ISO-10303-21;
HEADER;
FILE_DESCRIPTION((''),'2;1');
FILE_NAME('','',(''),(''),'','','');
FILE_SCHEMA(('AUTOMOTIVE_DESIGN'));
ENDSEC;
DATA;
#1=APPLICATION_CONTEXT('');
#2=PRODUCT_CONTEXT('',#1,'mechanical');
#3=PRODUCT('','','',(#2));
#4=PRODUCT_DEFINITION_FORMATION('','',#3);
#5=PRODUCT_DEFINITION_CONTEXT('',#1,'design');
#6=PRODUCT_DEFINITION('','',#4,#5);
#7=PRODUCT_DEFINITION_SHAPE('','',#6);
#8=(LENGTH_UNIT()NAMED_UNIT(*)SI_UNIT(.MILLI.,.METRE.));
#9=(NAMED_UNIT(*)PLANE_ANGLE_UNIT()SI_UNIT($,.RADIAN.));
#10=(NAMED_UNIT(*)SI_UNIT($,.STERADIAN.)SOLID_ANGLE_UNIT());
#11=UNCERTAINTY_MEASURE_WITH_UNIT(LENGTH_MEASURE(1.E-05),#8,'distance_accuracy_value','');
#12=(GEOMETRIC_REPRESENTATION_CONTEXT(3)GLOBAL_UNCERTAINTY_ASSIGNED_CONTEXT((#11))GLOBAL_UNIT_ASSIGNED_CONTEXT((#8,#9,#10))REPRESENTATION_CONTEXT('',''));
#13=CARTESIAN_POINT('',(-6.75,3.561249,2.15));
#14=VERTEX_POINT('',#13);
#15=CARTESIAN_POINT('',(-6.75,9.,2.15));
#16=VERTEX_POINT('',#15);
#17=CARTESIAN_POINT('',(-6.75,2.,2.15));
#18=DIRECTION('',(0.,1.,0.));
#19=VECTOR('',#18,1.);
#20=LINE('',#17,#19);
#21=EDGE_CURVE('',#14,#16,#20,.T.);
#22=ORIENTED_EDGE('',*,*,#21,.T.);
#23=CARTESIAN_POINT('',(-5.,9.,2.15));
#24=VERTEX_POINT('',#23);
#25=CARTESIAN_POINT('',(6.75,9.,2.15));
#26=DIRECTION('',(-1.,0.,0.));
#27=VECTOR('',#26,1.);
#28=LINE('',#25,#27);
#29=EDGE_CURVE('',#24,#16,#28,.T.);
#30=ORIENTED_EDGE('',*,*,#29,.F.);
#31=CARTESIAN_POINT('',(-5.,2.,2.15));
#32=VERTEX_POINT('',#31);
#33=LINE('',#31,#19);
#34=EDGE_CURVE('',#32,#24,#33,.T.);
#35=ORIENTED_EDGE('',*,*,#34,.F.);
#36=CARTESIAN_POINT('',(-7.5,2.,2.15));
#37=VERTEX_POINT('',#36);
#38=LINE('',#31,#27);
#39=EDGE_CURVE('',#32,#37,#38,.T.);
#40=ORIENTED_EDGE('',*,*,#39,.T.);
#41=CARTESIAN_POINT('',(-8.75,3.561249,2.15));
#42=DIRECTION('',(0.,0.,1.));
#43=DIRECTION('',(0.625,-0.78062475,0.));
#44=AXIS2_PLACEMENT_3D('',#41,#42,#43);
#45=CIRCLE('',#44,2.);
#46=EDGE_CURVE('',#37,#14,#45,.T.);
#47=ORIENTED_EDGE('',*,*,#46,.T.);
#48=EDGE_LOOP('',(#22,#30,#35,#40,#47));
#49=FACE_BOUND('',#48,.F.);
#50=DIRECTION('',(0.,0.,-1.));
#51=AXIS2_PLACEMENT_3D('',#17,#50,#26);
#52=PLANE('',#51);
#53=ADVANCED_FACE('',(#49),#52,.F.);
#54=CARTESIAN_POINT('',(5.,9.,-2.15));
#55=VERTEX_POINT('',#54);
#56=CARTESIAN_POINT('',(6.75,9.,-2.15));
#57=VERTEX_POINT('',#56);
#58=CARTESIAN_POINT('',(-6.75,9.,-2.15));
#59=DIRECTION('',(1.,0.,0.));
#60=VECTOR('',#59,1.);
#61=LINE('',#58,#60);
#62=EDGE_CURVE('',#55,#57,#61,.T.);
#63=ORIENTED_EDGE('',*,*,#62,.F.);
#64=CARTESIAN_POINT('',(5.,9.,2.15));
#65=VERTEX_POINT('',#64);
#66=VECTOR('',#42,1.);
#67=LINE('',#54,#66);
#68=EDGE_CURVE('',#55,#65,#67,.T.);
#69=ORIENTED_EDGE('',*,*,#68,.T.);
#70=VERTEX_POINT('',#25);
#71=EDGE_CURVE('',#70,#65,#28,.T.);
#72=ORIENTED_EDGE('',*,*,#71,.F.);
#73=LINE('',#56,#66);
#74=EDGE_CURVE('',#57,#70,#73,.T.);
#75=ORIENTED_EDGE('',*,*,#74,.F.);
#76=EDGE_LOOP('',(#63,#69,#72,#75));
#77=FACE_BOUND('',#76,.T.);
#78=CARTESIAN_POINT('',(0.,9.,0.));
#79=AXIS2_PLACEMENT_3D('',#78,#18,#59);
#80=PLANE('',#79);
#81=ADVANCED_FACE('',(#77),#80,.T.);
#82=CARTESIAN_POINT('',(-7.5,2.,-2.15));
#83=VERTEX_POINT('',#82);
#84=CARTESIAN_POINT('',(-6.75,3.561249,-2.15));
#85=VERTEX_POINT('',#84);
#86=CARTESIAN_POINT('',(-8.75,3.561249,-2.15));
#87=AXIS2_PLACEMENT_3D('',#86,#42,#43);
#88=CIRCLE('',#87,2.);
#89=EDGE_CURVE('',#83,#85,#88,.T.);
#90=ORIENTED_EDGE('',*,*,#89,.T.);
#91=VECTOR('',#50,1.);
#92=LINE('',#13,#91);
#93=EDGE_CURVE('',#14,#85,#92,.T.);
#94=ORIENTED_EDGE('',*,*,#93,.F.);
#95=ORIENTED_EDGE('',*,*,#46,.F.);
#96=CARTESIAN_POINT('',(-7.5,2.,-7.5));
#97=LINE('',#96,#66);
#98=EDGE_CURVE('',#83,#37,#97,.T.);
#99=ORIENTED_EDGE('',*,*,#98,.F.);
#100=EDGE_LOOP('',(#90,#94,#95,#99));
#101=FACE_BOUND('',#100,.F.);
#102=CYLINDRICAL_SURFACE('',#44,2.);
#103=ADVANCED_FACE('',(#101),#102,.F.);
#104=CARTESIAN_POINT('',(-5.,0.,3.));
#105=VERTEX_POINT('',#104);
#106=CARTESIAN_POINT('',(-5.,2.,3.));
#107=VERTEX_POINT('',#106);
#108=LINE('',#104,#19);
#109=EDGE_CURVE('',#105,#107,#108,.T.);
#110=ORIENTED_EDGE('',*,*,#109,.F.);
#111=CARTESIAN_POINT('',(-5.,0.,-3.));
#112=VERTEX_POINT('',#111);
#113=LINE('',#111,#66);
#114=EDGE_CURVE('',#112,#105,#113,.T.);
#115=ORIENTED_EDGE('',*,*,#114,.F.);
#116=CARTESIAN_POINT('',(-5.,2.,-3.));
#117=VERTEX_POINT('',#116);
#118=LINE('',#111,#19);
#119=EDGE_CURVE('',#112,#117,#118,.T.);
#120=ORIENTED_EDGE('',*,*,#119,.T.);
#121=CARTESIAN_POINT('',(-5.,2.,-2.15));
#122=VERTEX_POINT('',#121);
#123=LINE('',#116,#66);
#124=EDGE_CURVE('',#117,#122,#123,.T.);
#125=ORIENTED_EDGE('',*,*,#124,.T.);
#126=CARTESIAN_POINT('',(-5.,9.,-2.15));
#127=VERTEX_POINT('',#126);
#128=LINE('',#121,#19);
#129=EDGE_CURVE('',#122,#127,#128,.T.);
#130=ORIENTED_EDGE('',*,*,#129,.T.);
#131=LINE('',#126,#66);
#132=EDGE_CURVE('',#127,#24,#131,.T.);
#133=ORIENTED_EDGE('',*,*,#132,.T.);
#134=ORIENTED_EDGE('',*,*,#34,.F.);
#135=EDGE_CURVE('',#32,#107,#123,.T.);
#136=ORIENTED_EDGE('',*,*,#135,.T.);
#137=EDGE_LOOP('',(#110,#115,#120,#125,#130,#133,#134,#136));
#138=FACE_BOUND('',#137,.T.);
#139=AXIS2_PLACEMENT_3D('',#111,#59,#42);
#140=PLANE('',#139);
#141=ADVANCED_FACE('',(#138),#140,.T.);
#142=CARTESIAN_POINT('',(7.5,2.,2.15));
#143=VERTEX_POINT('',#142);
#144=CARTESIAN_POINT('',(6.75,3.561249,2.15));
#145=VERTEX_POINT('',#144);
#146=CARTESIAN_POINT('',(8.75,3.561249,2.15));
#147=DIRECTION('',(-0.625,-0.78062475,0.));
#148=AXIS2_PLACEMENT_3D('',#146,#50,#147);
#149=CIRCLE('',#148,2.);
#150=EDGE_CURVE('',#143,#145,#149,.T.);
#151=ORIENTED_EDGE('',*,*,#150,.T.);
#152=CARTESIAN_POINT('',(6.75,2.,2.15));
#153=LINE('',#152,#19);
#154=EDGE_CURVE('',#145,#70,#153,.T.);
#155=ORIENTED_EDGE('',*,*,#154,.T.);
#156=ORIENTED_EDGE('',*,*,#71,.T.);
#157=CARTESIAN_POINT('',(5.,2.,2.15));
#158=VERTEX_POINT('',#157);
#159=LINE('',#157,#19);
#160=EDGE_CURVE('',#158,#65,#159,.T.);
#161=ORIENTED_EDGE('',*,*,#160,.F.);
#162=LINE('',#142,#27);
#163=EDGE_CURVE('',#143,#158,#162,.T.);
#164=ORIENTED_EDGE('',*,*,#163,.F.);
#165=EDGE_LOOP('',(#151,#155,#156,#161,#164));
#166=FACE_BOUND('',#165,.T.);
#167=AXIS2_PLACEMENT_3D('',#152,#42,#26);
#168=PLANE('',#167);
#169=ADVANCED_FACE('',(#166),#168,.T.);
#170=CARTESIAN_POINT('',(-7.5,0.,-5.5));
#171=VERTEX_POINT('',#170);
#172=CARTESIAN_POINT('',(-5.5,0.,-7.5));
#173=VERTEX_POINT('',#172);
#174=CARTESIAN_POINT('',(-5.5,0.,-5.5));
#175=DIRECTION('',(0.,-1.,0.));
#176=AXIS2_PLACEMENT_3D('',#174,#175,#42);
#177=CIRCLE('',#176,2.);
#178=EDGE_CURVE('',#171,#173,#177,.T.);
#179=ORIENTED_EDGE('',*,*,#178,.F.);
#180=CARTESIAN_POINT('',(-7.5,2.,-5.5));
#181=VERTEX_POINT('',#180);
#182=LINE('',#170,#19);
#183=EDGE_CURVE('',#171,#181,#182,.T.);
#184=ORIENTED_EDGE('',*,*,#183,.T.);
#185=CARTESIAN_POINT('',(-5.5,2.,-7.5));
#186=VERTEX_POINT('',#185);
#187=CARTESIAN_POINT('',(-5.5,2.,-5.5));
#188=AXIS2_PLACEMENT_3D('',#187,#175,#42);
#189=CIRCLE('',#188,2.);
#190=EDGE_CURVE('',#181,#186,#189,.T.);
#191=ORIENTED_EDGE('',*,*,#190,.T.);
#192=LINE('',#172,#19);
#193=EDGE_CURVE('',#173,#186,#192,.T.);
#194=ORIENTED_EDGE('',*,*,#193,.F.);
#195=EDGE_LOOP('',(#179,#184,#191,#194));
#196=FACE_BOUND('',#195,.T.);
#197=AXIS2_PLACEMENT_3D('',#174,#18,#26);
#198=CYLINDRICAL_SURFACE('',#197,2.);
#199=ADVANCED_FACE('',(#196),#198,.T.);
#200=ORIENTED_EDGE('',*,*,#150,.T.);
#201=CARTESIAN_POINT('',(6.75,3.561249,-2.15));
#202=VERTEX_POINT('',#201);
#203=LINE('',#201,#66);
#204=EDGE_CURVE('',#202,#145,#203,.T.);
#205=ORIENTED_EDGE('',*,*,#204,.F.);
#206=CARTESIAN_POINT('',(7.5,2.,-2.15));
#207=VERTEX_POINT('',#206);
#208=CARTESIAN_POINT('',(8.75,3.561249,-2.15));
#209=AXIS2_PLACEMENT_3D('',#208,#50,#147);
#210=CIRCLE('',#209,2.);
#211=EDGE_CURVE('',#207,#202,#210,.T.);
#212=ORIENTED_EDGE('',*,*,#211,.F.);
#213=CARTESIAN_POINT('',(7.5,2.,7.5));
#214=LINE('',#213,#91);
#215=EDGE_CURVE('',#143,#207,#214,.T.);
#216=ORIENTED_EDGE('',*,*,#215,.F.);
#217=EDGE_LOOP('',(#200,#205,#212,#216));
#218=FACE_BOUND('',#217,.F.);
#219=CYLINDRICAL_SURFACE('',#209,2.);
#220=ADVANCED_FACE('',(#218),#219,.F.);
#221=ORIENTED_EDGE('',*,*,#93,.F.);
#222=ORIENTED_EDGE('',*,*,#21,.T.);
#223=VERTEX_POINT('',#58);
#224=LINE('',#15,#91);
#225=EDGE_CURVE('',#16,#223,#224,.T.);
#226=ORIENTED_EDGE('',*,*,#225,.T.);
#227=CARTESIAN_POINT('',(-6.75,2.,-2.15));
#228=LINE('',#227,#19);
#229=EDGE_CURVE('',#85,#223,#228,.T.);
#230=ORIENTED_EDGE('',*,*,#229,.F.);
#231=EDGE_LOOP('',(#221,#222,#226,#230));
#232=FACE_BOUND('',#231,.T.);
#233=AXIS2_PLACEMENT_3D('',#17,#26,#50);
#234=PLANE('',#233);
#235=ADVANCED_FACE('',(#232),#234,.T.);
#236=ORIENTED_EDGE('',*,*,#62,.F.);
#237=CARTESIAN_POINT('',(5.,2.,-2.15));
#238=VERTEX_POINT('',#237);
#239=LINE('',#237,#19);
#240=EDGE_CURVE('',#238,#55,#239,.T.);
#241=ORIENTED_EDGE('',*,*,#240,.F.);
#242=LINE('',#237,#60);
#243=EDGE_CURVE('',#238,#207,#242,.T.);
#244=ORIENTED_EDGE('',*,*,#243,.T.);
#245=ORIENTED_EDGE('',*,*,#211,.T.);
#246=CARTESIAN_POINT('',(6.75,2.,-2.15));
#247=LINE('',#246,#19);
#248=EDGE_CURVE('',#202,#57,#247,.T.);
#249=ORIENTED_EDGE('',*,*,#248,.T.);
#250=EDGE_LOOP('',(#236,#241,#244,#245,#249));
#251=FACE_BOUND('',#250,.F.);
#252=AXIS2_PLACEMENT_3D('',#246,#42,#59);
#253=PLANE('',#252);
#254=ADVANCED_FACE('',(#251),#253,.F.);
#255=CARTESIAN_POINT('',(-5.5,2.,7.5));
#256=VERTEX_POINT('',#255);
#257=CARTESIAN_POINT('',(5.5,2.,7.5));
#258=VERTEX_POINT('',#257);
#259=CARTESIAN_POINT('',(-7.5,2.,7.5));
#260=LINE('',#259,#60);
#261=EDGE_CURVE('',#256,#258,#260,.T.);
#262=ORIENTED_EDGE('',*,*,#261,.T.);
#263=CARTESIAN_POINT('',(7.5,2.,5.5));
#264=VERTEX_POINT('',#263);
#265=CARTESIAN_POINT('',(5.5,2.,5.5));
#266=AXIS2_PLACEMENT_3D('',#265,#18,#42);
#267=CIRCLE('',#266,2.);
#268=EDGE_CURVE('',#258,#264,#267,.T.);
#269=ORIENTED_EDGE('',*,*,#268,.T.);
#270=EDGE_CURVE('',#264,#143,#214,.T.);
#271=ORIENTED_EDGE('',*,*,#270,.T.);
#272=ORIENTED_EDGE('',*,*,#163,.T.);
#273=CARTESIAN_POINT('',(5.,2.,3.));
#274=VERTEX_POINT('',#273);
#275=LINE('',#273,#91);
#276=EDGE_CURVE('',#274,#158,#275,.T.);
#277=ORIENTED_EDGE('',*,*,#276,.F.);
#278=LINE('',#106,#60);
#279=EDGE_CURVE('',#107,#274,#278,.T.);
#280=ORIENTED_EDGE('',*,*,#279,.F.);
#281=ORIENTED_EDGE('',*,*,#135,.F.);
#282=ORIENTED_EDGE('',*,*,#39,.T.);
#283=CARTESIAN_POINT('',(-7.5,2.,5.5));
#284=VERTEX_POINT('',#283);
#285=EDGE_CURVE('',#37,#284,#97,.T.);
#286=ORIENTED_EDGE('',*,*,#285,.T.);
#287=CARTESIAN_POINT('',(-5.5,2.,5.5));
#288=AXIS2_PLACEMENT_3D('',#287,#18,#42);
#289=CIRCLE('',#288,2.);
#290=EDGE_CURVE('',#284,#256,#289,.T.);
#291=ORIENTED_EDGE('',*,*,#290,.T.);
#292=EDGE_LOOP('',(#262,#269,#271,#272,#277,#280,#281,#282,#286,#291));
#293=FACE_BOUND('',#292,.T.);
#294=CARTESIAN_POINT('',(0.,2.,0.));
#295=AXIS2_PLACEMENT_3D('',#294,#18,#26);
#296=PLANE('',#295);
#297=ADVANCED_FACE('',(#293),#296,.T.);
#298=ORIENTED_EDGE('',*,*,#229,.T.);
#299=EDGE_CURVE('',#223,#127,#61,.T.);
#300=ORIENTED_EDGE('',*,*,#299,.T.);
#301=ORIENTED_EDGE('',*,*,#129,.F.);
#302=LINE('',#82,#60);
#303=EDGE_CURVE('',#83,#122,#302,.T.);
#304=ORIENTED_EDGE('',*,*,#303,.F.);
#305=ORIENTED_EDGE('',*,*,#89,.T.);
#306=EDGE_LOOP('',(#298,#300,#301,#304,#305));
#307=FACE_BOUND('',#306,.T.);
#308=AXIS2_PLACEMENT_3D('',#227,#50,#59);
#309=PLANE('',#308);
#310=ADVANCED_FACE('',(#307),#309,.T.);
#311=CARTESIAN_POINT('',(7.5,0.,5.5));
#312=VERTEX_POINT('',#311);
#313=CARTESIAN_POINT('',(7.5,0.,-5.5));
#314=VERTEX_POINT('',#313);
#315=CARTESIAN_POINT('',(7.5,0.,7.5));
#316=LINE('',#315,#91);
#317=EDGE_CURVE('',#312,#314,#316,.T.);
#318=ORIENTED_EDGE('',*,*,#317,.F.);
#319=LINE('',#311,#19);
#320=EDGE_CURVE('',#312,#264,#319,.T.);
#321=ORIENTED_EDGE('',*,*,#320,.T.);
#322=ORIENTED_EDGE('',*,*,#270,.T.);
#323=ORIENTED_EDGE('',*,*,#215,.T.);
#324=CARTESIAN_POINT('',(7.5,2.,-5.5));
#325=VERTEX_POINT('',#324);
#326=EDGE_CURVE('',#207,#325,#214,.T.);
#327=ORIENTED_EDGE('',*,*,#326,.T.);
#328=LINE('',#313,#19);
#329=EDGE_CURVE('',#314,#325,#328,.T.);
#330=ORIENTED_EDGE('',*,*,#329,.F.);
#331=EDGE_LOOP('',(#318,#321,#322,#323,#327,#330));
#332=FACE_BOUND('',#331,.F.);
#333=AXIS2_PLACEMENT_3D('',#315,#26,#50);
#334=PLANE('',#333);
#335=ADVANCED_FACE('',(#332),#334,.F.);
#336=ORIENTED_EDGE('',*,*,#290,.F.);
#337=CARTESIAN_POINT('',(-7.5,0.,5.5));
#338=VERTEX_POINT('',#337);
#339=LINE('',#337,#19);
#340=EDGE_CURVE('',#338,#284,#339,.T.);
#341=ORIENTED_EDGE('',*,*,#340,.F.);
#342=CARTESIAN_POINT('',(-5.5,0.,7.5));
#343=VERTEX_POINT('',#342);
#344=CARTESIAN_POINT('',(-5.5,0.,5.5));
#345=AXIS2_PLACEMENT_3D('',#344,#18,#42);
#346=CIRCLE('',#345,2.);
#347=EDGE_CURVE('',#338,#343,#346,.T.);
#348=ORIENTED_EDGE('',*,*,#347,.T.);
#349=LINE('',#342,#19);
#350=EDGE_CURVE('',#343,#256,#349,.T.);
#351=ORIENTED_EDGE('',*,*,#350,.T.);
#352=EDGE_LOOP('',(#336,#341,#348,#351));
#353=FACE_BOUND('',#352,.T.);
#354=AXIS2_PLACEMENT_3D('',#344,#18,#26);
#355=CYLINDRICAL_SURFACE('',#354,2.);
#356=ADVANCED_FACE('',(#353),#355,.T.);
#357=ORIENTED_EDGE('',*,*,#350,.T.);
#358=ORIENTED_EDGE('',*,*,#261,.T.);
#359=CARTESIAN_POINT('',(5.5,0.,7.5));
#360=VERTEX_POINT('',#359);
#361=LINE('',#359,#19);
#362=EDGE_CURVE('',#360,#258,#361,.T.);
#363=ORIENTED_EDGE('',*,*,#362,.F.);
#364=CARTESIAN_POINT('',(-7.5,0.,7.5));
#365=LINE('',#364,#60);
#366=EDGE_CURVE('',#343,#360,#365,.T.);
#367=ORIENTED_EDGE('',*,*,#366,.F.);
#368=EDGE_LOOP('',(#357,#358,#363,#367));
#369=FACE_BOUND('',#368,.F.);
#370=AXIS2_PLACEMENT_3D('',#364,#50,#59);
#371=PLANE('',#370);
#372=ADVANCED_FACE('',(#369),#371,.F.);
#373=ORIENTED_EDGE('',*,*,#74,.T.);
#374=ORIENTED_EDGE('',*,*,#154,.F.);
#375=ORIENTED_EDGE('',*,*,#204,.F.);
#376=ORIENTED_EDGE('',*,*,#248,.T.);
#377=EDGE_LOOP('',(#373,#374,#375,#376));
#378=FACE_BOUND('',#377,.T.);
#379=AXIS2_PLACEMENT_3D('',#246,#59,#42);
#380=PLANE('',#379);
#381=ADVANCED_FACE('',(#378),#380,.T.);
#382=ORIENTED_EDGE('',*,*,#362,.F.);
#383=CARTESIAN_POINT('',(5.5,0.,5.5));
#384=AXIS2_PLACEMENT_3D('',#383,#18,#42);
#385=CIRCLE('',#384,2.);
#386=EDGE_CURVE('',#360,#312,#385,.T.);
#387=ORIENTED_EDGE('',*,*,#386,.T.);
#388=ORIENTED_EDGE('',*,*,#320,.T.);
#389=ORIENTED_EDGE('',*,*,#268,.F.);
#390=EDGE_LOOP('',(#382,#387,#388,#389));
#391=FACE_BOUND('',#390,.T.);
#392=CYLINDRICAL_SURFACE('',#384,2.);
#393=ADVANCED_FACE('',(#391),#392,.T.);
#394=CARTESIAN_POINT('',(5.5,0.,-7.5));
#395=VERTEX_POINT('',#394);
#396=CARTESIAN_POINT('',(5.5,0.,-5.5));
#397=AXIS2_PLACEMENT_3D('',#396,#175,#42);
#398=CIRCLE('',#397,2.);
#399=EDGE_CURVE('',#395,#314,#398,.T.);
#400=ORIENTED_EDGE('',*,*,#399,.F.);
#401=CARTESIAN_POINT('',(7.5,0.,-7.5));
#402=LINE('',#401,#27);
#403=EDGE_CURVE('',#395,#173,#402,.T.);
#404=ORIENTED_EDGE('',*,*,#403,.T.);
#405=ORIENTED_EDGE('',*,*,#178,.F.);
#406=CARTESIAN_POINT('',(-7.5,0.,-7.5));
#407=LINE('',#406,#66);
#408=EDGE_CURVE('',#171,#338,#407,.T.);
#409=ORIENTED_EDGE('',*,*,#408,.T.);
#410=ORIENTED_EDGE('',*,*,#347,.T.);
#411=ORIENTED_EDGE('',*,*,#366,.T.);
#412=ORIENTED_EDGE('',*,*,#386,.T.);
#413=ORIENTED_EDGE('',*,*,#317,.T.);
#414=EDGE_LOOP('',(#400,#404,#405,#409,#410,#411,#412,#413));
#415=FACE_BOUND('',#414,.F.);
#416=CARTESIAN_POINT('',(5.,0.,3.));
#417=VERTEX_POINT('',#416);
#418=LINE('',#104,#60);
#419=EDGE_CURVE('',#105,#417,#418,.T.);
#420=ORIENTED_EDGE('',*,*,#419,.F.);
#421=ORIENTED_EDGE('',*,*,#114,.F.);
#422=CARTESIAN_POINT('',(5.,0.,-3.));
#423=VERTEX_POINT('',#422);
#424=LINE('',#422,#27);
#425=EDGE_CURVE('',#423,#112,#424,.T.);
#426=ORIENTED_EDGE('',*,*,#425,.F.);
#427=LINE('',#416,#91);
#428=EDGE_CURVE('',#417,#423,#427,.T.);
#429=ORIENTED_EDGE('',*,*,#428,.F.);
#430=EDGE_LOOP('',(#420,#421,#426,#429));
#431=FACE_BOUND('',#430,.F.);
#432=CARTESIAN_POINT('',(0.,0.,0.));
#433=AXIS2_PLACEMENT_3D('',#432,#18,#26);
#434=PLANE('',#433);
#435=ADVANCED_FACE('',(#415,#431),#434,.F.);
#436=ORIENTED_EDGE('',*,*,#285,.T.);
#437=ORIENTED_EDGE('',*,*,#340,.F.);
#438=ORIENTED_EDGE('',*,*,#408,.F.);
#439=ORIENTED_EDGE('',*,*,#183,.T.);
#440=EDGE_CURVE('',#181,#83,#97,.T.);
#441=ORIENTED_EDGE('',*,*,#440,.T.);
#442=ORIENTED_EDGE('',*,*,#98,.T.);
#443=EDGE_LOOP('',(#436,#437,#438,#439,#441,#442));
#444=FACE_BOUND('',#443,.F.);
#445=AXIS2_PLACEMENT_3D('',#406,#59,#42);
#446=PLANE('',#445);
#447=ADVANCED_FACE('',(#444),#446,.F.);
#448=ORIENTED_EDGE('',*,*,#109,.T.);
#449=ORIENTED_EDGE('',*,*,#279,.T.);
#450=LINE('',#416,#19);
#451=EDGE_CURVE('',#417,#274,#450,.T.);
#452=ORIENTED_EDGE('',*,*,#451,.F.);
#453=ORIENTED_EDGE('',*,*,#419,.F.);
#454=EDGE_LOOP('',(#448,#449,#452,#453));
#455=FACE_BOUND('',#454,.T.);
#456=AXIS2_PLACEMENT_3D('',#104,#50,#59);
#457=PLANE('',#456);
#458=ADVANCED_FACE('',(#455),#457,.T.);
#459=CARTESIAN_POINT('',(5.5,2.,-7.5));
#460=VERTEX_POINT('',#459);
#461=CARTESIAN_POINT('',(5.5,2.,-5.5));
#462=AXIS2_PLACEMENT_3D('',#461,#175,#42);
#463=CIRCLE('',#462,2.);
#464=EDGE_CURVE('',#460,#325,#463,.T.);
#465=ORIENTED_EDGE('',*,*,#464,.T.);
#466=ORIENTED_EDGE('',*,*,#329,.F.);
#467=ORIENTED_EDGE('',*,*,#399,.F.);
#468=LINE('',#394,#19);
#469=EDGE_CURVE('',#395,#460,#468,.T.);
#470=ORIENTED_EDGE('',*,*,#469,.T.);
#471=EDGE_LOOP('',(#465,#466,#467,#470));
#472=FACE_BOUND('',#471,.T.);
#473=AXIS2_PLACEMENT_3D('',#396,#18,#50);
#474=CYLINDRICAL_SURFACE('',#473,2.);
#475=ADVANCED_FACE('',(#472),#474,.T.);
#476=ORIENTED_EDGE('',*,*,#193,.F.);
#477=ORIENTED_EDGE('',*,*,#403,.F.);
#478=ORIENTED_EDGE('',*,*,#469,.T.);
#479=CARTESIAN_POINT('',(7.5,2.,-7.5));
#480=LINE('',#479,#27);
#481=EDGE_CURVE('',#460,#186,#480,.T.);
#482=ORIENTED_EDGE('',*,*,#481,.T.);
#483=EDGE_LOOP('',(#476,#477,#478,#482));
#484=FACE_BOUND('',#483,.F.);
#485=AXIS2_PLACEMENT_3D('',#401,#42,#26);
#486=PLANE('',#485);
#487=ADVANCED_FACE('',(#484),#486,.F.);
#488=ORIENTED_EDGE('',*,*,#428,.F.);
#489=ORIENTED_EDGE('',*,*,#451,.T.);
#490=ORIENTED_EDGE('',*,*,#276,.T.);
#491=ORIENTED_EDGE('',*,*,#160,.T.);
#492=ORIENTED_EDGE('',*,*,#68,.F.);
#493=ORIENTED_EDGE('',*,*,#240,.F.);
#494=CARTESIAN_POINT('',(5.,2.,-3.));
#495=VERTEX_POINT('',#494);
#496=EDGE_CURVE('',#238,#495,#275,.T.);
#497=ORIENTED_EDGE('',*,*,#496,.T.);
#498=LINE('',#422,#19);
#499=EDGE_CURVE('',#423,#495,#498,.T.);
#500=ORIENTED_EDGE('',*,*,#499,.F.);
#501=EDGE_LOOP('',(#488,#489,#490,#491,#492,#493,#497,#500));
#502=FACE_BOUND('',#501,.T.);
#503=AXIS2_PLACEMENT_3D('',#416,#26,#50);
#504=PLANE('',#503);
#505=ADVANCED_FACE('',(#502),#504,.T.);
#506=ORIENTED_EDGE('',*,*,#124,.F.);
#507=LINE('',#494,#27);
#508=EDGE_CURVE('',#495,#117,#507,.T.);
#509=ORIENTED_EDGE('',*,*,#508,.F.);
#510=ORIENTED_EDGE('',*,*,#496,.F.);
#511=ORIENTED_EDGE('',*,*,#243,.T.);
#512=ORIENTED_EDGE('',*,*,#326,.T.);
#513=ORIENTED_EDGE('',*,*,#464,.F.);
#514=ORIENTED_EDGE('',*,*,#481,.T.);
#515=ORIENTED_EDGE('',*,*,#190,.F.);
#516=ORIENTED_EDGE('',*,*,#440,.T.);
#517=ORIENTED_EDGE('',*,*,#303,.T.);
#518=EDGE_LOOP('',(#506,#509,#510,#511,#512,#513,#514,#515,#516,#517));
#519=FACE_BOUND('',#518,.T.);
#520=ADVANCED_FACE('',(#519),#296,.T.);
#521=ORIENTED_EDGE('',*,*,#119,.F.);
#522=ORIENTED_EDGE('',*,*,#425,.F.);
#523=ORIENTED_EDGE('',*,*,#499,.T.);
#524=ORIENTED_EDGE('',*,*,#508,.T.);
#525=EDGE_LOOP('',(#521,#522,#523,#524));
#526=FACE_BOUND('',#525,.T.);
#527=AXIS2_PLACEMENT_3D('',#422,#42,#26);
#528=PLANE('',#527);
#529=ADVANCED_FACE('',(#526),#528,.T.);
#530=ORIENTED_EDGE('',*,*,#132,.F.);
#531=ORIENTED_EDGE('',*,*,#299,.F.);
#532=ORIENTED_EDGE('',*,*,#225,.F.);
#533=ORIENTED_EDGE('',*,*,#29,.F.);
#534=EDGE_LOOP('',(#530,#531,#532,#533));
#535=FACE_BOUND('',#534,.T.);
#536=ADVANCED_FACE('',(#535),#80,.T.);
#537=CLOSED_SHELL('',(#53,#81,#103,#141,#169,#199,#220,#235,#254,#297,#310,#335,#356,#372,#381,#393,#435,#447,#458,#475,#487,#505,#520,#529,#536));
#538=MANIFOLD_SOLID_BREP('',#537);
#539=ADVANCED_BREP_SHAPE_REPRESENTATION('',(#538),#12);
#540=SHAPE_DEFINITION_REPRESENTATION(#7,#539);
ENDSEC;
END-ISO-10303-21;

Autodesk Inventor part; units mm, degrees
ref_plane "YZ Plane" through (0, 0, 0) normal (1, 0, 0) x (0, 1, 0)
ref_plane "XZ Plane" through (0, 0, 0) normal (0, 1, 0) x (-1, 0, 0)
ref_plane "XY Plane" through (0, 0, 0) normal (0, 0, 1) x (1, 0, 0)
sketch "スケッチ1" plane through (0, 0, 0) normal (0, 1, 0) x (-1, 0, 0)
  line L0 (7.5, 7.5) -> (-7.5, 7.5)
  line L1 (-7.5, 7.5) -> (-7.5, -7.5)
  line L2 (-7.5, -7.5) -> (7.5, -7.5)
  line L3 (7.5, -7.5) -> (7.5, 7.5)
  line L4 (7.5, 7.5) -> (-7.5, -7.5) construction
  line L5 (-7.5, 7.5) -> (7.5, -7.5) construction
  line L6 (5, 3) -> (-5, 3)
  line L7 (-5, 3) -> (-5, -3)
  line L8 (-5, -3) -> (5, -3)
  line L9 (5, -3) -> (5, 3)
  line L10 (5, 3) -> (-5, -3) construction
  line L11 (-5, 3) -> (5, -3) construction
  point P0 (0, 0)
  dimension "d0" = 15
  dimension "d1" = 15
  dimension "d2" = 10
  dimension "d3" = 6
extrude "押し出し1" add sketch "スケッチ1" along normal blind 2
sketch "スケッチ2" plane through (0, 2, 0) normal (0, 1, 0) x (1, 0, 0)
  line L0 (-6.75, 2.15) -> (6.75, 2.15)
  line L1 (6.75, 2.15) -> (6.75, -2.15)
  line L2 (6.75, -2.15) -> (-6.75, -2.15)
  line L3 (-6.75, -2.15) -> (-6.75, 2.15)
  line L4 (-6.75, 2.15) -> (6.75, -2.15) construction
  line L5 (6.75, 2.15) -> (-6.75, -2.15) construction
  line L6 (-5, -3) -> (-5, 3) projected
  line L7 (-5, 2.15) -> (-5, -2.15)
  line L8 (5, 3) -> (5, -3) projected
  line L9 (5, 2.15) -> (5, -2.15)
  point P0 (0, 0)
  dimension "d8" = 13.5
  dimension "d9" = 4.3
extrude "押し出し2" add sketch "スケッチ2" along normal blind 7 contours L0 L6 L2 L3 | L0 L1 L2 L8
fillet "フィレット1" radius 2 2 edges at (6.75, 2, 0) (-6.75, 2, 0)
fillet "フィレット2" radius 2 4 edges at (-7.5, 1, 7.5) (7.5, 1, 7.5) (7.5, 1, -7.5) (-7.5, 1, -7.5)
properties part number "LRA_case3"
